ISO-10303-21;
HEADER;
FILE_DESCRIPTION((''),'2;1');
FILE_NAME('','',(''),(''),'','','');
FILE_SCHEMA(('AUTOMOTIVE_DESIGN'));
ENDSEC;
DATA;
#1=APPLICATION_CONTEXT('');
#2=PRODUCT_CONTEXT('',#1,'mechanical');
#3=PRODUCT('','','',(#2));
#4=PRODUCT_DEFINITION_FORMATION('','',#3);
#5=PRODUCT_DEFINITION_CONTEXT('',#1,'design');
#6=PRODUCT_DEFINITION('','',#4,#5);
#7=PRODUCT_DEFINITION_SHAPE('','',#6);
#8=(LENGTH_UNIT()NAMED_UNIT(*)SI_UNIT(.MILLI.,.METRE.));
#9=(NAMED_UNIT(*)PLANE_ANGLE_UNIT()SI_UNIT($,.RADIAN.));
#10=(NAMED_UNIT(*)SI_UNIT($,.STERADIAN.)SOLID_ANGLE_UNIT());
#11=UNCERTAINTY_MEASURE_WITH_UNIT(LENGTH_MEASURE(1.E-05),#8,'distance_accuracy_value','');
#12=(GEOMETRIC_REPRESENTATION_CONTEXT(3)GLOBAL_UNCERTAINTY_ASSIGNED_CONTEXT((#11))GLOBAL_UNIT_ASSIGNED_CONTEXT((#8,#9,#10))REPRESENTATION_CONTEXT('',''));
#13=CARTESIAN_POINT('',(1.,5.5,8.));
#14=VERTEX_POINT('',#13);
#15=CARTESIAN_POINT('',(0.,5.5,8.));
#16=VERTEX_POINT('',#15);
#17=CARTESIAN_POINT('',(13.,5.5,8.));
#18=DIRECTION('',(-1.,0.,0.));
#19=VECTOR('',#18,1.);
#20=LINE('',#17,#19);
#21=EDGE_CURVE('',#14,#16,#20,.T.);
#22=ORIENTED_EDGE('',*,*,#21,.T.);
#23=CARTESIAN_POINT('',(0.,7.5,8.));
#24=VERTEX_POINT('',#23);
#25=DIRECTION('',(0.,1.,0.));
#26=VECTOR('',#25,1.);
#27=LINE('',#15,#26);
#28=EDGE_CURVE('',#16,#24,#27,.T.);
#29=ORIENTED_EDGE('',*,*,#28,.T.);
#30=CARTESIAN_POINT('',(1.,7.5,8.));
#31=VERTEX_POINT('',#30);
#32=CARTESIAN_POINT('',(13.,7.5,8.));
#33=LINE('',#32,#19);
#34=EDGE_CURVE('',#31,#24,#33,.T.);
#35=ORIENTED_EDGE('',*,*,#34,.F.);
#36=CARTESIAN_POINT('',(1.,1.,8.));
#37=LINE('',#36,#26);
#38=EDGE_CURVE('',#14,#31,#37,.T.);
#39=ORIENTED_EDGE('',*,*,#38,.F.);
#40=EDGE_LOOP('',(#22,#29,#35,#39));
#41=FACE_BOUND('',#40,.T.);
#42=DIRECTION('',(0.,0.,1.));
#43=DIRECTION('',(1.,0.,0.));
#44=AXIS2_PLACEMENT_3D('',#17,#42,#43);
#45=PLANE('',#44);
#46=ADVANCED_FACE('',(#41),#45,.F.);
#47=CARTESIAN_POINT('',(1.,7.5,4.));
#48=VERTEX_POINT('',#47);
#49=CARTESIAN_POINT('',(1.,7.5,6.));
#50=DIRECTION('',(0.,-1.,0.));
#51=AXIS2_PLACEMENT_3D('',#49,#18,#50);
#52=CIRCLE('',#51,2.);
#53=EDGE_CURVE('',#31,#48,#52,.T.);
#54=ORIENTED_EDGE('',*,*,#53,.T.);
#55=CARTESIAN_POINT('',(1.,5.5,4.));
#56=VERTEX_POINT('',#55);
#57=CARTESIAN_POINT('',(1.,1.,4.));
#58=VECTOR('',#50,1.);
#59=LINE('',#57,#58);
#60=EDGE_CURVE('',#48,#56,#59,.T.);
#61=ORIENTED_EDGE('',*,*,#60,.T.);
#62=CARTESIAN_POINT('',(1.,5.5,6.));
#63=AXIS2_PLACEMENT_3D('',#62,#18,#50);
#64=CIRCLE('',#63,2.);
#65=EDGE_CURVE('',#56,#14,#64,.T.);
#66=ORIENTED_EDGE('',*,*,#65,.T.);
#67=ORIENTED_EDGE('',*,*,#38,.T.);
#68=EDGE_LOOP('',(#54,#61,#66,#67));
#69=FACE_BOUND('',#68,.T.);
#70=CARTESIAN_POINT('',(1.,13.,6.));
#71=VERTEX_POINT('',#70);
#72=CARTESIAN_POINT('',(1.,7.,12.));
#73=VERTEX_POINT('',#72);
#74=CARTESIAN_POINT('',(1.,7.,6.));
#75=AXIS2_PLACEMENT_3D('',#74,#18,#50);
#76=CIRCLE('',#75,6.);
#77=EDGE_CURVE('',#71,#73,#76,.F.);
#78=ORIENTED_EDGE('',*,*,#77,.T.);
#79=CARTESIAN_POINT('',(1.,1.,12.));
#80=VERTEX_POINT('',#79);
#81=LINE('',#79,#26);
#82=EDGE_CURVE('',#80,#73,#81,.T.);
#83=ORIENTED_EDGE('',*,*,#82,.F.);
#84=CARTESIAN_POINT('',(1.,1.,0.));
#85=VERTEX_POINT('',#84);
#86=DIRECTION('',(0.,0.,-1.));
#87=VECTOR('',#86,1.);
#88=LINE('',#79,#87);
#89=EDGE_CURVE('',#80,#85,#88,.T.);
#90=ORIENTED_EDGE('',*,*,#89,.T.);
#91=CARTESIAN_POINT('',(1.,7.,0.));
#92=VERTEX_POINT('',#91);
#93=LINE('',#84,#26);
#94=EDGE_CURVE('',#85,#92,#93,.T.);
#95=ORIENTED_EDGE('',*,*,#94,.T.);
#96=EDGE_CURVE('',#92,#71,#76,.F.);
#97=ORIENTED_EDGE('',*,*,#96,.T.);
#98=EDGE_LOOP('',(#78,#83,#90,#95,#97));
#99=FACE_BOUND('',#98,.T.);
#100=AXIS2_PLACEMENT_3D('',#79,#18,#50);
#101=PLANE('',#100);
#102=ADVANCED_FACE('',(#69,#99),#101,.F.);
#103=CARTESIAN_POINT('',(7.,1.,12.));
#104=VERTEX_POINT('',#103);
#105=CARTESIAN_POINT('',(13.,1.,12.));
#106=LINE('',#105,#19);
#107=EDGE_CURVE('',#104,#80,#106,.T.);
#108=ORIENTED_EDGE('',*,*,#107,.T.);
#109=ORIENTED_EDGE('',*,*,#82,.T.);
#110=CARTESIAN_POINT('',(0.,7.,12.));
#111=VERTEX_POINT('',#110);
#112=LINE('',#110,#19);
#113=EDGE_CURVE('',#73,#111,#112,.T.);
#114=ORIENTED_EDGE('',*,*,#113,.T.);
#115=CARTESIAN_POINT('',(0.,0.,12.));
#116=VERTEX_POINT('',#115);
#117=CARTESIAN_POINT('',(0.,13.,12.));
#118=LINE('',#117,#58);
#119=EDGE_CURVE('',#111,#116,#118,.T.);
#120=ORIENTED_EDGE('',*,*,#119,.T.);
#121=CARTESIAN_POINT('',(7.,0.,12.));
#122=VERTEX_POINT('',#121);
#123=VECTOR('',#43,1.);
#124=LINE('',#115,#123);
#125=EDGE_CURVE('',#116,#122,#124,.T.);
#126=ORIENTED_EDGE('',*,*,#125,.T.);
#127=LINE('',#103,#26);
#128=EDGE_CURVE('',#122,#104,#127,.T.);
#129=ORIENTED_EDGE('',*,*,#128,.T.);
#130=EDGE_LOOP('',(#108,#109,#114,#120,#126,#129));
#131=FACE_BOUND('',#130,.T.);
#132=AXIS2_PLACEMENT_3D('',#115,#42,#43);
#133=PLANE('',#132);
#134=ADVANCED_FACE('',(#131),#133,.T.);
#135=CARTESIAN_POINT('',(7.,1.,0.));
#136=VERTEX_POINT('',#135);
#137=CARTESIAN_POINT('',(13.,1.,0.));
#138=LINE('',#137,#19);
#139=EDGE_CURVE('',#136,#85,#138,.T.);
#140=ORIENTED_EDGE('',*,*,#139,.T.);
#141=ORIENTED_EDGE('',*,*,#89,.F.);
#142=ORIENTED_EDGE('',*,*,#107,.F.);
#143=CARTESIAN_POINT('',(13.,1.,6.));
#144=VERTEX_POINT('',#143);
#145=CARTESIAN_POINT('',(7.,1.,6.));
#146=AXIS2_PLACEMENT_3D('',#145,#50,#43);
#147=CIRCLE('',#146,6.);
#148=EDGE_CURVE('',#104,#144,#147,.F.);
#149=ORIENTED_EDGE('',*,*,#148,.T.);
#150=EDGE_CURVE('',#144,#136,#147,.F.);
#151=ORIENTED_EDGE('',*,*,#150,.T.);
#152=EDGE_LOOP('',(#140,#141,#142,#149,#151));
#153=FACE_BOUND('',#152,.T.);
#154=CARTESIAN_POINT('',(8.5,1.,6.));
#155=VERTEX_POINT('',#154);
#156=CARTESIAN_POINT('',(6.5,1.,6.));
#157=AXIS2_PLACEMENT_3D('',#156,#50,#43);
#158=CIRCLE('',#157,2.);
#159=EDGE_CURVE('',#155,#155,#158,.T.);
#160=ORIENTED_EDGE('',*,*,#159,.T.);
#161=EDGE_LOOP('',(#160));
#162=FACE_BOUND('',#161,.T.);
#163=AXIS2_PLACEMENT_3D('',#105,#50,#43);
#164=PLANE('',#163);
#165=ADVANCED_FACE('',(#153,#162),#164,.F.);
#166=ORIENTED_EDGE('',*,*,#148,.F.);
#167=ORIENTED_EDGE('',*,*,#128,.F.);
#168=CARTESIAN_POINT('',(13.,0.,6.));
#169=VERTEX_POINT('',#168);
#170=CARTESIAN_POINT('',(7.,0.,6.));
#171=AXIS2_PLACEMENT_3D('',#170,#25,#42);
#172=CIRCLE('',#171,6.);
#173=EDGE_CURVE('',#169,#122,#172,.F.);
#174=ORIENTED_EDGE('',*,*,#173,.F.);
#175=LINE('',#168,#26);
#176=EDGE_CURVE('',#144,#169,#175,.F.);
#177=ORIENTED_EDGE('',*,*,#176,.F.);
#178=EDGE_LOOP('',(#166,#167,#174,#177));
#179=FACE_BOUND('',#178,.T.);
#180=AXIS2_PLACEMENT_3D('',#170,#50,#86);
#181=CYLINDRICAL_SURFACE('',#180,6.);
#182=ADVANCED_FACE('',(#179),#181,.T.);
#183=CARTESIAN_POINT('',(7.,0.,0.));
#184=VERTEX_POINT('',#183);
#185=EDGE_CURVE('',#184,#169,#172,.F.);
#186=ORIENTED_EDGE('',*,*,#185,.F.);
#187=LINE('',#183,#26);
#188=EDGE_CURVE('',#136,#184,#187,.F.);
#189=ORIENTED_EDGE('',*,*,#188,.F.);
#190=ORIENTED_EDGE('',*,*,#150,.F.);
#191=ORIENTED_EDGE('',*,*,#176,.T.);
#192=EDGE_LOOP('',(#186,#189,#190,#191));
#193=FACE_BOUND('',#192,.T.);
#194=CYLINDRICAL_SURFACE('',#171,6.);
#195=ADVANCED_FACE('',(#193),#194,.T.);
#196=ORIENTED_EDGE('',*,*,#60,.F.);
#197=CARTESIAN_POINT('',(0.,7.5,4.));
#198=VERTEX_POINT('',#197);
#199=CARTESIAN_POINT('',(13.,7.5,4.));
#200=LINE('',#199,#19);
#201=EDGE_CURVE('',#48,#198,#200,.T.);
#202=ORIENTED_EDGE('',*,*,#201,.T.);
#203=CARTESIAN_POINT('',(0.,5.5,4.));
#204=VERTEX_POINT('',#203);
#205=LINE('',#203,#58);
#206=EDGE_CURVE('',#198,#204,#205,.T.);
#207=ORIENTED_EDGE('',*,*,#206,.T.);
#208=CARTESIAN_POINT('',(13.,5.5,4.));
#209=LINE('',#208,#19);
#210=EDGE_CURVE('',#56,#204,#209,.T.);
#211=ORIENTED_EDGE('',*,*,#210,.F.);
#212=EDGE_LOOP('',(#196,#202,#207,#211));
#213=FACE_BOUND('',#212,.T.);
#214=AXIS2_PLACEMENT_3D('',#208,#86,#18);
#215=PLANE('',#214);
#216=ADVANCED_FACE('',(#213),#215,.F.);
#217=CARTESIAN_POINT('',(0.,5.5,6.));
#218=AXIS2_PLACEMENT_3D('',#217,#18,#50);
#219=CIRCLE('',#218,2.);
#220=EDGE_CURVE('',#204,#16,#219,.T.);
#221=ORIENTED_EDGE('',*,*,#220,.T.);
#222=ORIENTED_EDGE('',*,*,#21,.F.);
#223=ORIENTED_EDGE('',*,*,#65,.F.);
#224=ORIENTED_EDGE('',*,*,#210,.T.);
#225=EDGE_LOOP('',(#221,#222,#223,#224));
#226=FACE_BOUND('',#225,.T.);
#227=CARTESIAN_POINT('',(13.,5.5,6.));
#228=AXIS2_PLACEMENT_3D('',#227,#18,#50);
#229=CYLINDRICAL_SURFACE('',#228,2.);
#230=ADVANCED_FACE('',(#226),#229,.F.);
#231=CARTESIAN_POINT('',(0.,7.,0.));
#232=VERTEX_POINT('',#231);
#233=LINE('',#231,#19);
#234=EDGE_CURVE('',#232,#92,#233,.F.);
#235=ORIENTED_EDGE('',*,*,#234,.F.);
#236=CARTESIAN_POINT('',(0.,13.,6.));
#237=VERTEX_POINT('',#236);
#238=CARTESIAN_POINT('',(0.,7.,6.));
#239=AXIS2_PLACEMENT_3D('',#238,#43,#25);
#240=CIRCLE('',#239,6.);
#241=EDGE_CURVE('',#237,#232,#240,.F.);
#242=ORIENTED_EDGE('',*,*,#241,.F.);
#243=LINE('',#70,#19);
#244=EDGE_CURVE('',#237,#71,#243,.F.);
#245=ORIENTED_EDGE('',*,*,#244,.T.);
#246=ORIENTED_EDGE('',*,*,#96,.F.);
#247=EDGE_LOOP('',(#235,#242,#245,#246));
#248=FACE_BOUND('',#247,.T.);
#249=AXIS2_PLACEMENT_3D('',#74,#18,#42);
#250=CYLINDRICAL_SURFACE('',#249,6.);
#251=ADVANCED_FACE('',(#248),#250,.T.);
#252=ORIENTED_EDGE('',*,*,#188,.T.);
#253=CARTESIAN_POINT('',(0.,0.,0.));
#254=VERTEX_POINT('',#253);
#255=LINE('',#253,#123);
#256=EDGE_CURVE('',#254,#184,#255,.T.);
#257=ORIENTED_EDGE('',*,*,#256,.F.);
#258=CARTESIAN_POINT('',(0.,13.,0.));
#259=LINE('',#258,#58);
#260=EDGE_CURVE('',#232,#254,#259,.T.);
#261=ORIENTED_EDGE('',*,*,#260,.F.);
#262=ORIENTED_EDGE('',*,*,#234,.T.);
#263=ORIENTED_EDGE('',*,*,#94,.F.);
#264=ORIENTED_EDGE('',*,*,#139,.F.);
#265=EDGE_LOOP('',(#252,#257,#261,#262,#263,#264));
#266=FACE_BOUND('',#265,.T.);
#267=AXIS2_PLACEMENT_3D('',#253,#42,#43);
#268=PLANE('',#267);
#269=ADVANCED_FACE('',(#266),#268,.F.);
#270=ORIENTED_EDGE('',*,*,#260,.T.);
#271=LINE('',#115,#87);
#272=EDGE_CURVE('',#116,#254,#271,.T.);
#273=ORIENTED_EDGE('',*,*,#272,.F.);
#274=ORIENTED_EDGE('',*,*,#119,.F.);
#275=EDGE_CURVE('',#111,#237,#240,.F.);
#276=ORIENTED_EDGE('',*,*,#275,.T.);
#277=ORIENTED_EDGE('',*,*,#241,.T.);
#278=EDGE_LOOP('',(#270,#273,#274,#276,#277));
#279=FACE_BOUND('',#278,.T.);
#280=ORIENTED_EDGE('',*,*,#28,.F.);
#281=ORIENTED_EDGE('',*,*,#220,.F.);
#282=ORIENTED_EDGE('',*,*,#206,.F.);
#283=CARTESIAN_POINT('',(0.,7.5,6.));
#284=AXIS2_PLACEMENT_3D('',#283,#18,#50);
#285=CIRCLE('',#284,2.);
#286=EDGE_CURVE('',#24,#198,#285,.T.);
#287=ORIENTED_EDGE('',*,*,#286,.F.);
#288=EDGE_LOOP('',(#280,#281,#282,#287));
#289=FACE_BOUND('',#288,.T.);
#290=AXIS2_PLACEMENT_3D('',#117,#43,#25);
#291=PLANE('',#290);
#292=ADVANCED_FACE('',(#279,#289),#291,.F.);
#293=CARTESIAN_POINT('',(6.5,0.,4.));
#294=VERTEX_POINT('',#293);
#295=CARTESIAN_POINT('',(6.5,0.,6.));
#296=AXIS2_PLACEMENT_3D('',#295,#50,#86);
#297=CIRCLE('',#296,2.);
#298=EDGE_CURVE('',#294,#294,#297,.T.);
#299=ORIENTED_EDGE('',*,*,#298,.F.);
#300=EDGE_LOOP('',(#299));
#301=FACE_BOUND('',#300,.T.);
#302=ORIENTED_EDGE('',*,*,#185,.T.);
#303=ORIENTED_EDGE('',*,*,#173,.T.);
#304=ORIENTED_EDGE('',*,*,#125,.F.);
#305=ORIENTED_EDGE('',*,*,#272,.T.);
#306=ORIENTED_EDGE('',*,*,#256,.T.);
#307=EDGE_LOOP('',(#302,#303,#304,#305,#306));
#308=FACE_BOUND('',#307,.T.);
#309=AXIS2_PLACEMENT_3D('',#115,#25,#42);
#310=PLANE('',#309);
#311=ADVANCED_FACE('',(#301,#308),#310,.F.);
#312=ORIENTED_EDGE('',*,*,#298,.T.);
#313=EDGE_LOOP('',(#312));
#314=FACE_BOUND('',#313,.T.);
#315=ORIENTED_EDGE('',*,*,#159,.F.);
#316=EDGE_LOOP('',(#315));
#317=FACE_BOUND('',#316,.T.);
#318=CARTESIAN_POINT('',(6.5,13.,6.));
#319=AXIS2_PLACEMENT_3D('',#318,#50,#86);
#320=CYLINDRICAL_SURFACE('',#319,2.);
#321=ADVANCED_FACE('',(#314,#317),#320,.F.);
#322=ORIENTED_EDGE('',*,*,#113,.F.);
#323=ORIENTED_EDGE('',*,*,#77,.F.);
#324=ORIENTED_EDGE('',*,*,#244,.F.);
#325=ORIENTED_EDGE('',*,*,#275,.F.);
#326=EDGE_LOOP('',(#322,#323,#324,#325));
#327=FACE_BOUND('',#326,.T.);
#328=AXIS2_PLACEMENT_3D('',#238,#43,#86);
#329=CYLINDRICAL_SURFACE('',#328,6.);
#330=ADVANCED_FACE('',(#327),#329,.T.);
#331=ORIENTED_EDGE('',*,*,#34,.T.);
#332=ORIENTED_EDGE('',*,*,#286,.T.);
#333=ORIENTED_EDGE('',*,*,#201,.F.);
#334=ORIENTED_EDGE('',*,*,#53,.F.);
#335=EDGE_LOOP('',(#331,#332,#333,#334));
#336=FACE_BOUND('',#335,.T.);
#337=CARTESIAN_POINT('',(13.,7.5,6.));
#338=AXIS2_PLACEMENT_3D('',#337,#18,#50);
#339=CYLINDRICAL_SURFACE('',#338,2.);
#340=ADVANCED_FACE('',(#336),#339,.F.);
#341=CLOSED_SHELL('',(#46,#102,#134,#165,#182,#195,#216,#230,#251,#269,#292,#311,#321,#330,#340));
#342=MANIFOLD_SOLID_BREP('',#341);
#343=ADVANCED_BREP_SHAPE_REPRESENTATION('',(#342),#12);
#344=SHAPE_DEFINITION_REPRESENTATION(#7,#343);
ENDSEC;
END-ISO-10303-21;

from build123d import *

# Parameters (mm, degrees)
BOSS_EXTRUDE1_DEPTH = 12
CUT_EXTRUDE1_DEPTH  = 22.9544984
SKETCH3_R           = 2
CUT_EXTRUDE2_DEPTH  = 22.9544984
FILLET1_R           = 6


with BuildPart() as part:
    # Sketch1 → Boss-Extrude1 (new body)
    with BuildSketch(Plane.XY):
        Polygon((0, 0), (13, 0), (13, 1), (1, 1), (1, 13), (0, 13), align=None)
    extrude(amount=BOSS_EXTRUDE1_DEPTH)

    # Sketch2 → Cut-Extrude1 (cut, through all)
    with BuildSketch(Plane.ZY):
        with BuildLine():
            Line((4, 5.5), (4, 7.5))
            ThreePointArc((4, 7.5), (6, 9.5), (8, 7.5))
            Line((8, 7.5), (8, 5.5))
            ThreePointArc((8, 5.5), (6, 3.5), (4, 5.5))
        make_face()
    extrude(amount=-CUT_EXTRUDE1_DEPTH, mode=Mode.SUBTRACT)

    # Sketch3 → Cut-Extrude2 (cut, through all)
    with BuildSketch(Plane.XZ):
        with Locations(Location((6.5, 6, 0), (0, 0, 270))):
            Circle(SKETCH3_R)
    extrude(amount=-CUT_EXTRUDE2_DEPTH, mode=Mode.SUBTRACT)

    # Fillet1
    fillet1_edges = [part.edges().sort_by_distance(p)[0] for p in [
        (0.5, 13, 0),
        (13, 0.5, 0),
        (13, 0.5, 12),
        (0.5, 13, 12),
    ]]
    fillet(fillet1_edges, radius=FILLET1_R - 0.0001)  # a hair under: the kernel refuses the full size


solid = part.part
